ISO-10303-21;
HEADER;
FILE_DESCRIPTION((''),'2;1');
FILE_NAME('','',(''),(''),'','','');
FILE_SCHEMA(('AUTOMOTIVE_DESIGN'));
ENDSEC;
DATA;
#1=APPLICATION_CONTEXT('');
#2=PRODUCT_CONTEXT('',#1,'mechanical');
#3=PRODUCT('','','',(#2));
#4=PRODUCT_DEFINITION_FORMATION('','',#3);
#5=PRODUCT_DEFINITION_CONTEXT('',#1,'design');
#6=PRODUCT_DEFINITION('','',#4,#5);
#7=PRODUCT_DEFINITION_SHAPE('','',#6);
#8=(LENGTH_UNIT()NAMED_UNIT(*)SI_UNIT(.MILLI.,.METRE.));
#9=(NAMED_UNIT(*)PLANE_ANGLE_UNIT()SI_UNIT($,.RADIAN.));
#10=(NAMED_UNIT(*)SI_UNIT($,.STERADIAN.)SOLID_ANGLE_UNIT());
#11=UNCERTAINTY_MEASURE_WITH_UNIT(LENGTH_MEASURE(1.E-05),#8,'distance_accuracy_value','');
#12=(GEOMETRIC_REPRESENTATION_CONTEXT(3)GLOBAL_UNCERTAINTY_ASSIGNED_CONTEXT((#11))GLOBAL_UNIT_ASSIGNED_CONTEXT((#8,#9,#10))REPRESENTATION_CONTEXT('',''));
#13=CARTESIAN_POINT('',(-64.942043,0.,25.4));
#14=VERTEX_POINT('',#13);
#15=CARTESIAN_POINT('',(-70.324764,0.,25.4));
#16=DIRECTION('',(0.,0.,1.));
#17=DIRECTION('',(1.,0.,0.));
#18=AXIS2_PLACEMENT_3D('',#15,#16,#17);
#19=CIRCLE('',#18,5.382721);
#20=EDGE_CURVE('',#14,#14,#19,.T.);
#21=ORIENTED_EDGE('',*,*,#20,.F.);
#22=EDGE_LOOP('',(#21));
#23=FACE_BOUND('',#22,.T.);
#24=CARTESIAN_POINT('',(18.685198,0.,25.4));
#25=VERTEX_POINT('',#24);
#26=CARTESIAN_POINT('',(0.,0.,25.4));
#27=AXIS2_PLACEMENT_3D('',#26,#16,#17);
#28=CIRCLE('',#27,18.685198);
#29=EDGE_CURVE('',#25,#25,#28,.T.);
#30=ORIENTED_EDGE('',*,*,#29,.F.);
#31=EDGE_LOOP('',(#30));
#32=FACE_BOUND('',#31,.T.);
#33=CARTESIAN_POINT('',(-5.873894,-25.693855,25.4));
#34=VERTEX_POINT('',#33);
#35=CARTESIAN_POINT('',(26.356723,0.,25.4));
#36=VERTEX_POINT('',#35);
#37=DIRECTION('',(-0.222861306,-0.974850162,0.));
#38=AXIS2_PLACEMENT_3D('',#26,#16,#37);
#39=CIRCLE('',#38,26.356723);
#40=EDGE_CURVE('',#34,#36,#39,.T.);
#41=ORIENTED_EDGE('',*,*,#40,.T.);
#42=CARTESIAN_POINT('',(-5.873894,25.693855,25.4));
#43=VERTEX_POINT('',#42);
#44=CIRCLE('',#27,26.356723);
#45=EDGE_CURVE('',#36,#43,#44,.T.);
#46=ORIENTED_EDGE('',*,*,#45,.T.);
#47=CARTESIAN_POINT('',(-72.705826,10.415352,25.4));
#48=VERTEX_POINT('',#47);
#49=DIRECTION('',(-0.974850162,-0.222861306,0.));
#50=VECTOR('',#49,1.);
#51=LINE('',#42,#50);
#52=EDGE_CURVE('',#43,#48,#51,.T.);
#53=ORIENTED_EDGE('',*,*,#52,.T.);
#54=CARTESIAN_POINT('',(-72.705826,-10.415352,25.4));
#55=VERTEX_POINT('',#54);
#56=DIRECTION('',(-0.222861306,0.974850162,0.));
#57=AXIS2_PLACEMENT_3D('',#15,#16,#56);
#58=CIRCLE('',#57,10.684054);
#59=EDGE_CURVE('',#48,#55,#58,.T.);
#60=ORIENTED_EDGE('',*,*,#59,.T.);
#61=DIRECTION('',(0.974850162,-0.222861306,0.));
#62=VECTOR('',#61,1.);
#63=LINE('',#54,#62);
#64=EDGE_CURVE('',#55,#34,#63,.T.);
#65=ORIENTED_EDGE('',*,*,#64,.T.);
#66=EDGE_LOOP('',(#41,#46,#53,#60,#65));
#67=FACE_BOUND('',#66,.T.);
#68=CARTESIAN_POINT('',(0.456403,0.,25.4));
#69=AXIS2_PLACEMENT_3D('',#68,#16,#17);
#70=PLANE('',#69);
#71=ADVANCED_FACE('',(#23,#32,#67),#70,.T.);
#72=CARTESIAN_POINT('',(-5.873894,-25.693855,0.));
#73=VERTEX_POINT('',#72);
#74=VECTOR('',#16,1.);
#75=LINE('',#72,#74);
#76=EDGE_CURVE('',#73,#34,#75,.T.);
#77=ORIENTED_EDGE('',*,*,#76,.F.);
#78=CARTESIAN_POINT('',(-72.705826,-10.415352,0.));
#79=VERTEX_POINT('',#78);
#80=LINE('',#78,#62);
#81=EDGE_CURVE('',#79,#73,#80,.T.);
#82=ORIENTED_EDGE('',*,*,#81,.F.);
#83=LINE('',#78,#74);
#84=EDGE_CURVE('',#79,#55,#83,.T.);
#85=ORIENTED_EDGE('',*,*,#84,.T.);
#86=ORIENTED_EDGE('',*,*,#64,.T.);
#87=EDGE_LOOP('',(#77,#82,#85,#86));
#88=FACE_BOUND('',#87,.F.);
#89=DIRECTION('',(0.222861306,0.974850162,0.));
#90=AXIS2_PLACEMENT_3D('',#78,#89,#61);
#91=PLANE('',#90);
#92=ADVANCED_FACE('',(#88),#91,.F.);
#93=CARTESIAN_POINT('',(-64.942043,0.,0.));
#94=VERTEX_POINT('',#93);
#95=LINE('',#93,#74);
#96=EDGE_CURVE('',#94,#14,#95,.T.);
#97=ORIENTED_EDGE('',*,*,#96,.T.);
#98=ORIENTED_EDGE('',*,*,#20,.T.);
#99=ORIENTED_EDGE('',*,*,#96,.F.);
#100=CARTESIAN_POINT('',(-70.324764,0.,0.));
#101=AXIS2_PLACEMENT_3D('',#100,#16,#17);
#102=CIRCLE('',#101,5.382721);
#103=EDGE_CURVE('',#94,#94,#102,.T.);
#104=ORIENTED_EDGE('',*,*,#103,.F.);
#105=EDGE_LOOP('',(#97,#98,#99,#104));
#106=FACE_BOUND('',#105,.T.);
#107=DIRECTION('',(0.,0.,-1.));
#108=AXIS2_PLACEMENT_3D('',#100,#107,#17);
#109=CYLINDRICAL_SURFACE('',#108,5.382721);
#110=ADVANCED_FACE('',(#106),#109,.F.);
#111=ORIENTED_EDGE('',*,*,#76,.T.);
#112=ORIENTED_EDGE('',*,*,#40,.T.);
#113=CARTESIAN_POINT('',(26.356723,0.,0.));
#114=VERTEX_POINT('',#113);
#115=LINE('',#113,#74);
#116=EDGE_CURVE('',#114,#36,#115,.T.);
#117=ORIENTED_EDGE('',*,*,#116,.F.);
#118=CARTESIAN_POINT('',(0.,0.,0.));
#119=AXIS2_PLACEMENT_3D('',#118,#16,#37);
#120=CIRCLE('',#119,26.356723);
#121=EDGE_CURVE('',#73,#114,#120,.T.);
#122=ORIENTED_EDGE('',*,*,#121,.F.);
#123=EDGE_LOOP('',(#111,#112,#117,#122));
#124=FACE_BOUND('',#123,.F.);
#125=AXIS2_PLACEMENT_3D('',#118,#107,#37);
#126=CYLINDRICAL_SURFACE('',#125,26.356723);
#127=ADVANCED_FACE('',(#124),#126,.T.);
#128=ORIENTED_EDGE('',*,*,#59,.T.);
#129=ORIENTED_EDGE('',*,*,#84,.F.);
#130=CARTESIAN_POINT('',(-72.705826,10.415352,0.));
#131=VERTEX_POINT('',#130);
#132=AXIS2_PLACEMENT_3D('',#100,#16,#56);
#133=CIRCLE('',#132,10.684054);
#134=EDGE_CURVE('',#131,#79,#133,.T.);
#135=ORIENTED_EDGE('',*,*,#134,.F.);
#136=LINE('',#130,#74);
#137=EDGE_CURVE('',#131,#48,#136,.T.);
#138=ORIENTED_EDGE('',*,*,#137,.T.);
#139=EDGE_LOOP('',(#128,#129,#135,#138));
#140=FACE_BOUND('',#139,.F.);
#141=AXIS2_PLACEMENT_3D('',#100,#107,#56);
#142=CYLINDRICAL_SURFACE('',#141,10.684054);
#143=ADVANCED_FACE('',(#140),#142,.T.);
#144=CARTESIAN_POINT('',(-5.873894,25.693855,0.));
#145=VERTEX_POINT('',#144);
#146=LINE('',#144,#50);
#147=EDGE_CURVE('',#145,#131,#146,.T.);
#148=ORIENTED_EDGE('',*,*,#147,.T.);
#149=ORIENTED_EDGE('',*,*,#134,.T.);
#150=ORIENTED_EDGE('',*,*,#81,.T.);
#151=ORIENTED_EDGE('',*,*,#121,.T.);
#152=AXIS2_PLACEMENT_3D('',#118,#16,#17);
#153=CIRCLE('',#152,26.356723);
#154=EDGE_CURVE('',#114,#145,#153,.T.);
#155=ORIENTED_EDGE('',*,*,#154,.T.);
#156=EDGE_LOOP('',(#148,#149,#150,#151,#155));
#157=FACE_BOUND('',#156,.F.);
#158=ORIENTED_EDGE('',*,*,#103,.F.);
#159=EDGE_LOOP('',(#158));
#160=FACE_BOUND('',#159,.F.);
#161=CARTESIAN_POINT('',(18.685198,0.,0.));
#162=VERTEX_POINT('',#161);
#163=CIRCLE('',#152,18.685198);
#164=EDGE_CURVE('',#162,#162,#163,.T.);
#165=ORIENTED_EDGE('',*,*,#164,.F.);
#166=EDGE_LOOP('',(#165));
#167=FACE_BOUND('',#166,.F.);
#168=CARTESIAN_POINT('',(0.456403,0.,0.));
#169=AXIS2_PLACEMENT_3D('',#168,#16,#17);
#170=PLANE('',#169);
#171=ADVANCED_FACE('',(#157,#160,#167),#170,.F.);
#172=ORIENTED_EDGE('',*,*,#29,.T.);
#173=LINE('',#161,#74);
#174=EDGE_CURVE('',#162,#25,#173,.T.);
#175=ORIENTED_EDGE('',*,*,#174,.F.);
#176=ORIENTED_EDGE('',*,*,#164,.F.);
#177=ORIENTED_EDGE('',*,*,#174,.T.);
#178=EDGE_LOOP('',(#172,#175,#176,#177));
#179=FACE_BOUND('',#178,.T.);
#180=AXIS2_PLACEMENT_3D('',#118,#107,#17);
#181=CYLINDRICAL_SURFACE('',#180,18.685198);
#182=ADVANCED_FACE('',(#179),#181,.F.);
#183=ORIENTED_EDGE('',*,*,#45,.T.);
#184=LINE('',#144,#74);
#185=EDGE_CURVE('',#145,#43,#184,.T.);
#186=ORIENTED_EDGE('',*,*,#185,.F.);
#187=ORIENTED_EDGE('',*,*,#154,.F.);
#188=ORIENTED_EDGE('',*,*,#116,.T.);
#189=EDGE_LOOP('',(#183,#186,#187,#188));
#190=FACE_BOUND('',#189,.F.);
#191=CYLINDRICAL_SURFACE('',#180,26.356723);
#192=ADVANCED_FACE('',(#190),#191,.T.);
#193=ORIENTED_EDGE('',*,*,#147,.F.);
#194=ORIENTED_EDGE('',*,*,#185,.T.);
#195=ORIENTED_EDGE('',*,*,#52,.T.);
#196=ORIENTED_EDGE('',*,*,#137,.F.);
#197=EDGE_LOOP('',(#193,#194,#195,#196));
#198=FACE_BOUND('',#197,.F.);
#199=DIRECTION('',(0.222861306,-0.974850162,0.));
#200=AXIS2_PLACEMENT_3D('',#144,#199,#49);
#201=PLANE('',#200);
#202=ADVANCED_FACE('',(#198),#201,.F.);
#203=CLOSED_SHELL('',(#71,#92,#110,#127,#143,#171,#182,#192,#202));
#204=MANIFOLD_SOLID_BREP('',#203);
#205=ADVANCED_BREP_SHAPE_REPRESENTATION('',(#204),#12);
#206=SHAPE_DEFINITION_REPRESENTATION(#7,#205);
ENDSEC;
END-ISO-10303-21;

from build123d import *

# Parameters (mm, degrees)
F0_R     = 18.6851980613
F0_R_2   = 5.3827208716
F1_DEPTH = 25.4


# Not quite as in the source:
# - a feature of the source that left no trace in its solid (it failed there, or was rolled back) is left out


with BuildPart() as f1:
    # F0 (on Top) → F1 (new body)
    with BuildSketch(Plane.XY):
        with BuildLine():
            ThreePointArc((-5.8738936456, -25.6938553834), (16.4295502843, -20.6093839908), (26.3567226912, 0))
            ThreePointArc((26.3567226912, 0), (16.4295502843, 20.6093839908), (-5.8738936456, 25.6938553834))
            ThreePointArc((-5.8738936456, 25.6938553834), (-26.3567226912, 0), (-5.8738936456, -25.6938553834))
        make_face()
        Circle(F0_R, mode=Mode.SUBTRACT)
        with BuildLine():
            ThreePointArc((-5.8738936456, -25.6938553834), (-26.3567226912, 0), (-5.8738936456, 25.6938553834))
            Line((-5.8738936456, 25.6938553834), (-72.7058258868, 10.4153517779))
            ThreePointArc((-72.7058258868, 10.4153517779), (-63.6648232454, 8.3542925337), (-59.6407096495, 0))
            ThreePointArc((-59.6407096495, 0), (-63.6648232454, -8.3542925337), (-72.7058258868, -10.4153517779))
            Line((-72.7058258868, -10.4153517779), (-5.8738936456, -25.6938553834))
        make_face()
        with BuildLine():
            ThreePointArc((-59.6407096495, 0), (-63.6648232454, 8.3542925337), (-72.7058258868, 10.4153517779))
            ThreePointArc((-72.7058258868, 10.4153517779), (-81.0088176618, 0), (-72.7058258868, -10.4153517779))
            ThreePointArc((-72.7058258868, -10.4153517779), (-63.6648232454, -8.3542925337), (-59.6407096495, 0))
        make_face()
        with Locations((-70.3247636557, 0)):
            Circle(F0_R_2, mode=Mode.SUBTRACT)
    extrude(amount=F1_DEPTH)


solid = f1.part
